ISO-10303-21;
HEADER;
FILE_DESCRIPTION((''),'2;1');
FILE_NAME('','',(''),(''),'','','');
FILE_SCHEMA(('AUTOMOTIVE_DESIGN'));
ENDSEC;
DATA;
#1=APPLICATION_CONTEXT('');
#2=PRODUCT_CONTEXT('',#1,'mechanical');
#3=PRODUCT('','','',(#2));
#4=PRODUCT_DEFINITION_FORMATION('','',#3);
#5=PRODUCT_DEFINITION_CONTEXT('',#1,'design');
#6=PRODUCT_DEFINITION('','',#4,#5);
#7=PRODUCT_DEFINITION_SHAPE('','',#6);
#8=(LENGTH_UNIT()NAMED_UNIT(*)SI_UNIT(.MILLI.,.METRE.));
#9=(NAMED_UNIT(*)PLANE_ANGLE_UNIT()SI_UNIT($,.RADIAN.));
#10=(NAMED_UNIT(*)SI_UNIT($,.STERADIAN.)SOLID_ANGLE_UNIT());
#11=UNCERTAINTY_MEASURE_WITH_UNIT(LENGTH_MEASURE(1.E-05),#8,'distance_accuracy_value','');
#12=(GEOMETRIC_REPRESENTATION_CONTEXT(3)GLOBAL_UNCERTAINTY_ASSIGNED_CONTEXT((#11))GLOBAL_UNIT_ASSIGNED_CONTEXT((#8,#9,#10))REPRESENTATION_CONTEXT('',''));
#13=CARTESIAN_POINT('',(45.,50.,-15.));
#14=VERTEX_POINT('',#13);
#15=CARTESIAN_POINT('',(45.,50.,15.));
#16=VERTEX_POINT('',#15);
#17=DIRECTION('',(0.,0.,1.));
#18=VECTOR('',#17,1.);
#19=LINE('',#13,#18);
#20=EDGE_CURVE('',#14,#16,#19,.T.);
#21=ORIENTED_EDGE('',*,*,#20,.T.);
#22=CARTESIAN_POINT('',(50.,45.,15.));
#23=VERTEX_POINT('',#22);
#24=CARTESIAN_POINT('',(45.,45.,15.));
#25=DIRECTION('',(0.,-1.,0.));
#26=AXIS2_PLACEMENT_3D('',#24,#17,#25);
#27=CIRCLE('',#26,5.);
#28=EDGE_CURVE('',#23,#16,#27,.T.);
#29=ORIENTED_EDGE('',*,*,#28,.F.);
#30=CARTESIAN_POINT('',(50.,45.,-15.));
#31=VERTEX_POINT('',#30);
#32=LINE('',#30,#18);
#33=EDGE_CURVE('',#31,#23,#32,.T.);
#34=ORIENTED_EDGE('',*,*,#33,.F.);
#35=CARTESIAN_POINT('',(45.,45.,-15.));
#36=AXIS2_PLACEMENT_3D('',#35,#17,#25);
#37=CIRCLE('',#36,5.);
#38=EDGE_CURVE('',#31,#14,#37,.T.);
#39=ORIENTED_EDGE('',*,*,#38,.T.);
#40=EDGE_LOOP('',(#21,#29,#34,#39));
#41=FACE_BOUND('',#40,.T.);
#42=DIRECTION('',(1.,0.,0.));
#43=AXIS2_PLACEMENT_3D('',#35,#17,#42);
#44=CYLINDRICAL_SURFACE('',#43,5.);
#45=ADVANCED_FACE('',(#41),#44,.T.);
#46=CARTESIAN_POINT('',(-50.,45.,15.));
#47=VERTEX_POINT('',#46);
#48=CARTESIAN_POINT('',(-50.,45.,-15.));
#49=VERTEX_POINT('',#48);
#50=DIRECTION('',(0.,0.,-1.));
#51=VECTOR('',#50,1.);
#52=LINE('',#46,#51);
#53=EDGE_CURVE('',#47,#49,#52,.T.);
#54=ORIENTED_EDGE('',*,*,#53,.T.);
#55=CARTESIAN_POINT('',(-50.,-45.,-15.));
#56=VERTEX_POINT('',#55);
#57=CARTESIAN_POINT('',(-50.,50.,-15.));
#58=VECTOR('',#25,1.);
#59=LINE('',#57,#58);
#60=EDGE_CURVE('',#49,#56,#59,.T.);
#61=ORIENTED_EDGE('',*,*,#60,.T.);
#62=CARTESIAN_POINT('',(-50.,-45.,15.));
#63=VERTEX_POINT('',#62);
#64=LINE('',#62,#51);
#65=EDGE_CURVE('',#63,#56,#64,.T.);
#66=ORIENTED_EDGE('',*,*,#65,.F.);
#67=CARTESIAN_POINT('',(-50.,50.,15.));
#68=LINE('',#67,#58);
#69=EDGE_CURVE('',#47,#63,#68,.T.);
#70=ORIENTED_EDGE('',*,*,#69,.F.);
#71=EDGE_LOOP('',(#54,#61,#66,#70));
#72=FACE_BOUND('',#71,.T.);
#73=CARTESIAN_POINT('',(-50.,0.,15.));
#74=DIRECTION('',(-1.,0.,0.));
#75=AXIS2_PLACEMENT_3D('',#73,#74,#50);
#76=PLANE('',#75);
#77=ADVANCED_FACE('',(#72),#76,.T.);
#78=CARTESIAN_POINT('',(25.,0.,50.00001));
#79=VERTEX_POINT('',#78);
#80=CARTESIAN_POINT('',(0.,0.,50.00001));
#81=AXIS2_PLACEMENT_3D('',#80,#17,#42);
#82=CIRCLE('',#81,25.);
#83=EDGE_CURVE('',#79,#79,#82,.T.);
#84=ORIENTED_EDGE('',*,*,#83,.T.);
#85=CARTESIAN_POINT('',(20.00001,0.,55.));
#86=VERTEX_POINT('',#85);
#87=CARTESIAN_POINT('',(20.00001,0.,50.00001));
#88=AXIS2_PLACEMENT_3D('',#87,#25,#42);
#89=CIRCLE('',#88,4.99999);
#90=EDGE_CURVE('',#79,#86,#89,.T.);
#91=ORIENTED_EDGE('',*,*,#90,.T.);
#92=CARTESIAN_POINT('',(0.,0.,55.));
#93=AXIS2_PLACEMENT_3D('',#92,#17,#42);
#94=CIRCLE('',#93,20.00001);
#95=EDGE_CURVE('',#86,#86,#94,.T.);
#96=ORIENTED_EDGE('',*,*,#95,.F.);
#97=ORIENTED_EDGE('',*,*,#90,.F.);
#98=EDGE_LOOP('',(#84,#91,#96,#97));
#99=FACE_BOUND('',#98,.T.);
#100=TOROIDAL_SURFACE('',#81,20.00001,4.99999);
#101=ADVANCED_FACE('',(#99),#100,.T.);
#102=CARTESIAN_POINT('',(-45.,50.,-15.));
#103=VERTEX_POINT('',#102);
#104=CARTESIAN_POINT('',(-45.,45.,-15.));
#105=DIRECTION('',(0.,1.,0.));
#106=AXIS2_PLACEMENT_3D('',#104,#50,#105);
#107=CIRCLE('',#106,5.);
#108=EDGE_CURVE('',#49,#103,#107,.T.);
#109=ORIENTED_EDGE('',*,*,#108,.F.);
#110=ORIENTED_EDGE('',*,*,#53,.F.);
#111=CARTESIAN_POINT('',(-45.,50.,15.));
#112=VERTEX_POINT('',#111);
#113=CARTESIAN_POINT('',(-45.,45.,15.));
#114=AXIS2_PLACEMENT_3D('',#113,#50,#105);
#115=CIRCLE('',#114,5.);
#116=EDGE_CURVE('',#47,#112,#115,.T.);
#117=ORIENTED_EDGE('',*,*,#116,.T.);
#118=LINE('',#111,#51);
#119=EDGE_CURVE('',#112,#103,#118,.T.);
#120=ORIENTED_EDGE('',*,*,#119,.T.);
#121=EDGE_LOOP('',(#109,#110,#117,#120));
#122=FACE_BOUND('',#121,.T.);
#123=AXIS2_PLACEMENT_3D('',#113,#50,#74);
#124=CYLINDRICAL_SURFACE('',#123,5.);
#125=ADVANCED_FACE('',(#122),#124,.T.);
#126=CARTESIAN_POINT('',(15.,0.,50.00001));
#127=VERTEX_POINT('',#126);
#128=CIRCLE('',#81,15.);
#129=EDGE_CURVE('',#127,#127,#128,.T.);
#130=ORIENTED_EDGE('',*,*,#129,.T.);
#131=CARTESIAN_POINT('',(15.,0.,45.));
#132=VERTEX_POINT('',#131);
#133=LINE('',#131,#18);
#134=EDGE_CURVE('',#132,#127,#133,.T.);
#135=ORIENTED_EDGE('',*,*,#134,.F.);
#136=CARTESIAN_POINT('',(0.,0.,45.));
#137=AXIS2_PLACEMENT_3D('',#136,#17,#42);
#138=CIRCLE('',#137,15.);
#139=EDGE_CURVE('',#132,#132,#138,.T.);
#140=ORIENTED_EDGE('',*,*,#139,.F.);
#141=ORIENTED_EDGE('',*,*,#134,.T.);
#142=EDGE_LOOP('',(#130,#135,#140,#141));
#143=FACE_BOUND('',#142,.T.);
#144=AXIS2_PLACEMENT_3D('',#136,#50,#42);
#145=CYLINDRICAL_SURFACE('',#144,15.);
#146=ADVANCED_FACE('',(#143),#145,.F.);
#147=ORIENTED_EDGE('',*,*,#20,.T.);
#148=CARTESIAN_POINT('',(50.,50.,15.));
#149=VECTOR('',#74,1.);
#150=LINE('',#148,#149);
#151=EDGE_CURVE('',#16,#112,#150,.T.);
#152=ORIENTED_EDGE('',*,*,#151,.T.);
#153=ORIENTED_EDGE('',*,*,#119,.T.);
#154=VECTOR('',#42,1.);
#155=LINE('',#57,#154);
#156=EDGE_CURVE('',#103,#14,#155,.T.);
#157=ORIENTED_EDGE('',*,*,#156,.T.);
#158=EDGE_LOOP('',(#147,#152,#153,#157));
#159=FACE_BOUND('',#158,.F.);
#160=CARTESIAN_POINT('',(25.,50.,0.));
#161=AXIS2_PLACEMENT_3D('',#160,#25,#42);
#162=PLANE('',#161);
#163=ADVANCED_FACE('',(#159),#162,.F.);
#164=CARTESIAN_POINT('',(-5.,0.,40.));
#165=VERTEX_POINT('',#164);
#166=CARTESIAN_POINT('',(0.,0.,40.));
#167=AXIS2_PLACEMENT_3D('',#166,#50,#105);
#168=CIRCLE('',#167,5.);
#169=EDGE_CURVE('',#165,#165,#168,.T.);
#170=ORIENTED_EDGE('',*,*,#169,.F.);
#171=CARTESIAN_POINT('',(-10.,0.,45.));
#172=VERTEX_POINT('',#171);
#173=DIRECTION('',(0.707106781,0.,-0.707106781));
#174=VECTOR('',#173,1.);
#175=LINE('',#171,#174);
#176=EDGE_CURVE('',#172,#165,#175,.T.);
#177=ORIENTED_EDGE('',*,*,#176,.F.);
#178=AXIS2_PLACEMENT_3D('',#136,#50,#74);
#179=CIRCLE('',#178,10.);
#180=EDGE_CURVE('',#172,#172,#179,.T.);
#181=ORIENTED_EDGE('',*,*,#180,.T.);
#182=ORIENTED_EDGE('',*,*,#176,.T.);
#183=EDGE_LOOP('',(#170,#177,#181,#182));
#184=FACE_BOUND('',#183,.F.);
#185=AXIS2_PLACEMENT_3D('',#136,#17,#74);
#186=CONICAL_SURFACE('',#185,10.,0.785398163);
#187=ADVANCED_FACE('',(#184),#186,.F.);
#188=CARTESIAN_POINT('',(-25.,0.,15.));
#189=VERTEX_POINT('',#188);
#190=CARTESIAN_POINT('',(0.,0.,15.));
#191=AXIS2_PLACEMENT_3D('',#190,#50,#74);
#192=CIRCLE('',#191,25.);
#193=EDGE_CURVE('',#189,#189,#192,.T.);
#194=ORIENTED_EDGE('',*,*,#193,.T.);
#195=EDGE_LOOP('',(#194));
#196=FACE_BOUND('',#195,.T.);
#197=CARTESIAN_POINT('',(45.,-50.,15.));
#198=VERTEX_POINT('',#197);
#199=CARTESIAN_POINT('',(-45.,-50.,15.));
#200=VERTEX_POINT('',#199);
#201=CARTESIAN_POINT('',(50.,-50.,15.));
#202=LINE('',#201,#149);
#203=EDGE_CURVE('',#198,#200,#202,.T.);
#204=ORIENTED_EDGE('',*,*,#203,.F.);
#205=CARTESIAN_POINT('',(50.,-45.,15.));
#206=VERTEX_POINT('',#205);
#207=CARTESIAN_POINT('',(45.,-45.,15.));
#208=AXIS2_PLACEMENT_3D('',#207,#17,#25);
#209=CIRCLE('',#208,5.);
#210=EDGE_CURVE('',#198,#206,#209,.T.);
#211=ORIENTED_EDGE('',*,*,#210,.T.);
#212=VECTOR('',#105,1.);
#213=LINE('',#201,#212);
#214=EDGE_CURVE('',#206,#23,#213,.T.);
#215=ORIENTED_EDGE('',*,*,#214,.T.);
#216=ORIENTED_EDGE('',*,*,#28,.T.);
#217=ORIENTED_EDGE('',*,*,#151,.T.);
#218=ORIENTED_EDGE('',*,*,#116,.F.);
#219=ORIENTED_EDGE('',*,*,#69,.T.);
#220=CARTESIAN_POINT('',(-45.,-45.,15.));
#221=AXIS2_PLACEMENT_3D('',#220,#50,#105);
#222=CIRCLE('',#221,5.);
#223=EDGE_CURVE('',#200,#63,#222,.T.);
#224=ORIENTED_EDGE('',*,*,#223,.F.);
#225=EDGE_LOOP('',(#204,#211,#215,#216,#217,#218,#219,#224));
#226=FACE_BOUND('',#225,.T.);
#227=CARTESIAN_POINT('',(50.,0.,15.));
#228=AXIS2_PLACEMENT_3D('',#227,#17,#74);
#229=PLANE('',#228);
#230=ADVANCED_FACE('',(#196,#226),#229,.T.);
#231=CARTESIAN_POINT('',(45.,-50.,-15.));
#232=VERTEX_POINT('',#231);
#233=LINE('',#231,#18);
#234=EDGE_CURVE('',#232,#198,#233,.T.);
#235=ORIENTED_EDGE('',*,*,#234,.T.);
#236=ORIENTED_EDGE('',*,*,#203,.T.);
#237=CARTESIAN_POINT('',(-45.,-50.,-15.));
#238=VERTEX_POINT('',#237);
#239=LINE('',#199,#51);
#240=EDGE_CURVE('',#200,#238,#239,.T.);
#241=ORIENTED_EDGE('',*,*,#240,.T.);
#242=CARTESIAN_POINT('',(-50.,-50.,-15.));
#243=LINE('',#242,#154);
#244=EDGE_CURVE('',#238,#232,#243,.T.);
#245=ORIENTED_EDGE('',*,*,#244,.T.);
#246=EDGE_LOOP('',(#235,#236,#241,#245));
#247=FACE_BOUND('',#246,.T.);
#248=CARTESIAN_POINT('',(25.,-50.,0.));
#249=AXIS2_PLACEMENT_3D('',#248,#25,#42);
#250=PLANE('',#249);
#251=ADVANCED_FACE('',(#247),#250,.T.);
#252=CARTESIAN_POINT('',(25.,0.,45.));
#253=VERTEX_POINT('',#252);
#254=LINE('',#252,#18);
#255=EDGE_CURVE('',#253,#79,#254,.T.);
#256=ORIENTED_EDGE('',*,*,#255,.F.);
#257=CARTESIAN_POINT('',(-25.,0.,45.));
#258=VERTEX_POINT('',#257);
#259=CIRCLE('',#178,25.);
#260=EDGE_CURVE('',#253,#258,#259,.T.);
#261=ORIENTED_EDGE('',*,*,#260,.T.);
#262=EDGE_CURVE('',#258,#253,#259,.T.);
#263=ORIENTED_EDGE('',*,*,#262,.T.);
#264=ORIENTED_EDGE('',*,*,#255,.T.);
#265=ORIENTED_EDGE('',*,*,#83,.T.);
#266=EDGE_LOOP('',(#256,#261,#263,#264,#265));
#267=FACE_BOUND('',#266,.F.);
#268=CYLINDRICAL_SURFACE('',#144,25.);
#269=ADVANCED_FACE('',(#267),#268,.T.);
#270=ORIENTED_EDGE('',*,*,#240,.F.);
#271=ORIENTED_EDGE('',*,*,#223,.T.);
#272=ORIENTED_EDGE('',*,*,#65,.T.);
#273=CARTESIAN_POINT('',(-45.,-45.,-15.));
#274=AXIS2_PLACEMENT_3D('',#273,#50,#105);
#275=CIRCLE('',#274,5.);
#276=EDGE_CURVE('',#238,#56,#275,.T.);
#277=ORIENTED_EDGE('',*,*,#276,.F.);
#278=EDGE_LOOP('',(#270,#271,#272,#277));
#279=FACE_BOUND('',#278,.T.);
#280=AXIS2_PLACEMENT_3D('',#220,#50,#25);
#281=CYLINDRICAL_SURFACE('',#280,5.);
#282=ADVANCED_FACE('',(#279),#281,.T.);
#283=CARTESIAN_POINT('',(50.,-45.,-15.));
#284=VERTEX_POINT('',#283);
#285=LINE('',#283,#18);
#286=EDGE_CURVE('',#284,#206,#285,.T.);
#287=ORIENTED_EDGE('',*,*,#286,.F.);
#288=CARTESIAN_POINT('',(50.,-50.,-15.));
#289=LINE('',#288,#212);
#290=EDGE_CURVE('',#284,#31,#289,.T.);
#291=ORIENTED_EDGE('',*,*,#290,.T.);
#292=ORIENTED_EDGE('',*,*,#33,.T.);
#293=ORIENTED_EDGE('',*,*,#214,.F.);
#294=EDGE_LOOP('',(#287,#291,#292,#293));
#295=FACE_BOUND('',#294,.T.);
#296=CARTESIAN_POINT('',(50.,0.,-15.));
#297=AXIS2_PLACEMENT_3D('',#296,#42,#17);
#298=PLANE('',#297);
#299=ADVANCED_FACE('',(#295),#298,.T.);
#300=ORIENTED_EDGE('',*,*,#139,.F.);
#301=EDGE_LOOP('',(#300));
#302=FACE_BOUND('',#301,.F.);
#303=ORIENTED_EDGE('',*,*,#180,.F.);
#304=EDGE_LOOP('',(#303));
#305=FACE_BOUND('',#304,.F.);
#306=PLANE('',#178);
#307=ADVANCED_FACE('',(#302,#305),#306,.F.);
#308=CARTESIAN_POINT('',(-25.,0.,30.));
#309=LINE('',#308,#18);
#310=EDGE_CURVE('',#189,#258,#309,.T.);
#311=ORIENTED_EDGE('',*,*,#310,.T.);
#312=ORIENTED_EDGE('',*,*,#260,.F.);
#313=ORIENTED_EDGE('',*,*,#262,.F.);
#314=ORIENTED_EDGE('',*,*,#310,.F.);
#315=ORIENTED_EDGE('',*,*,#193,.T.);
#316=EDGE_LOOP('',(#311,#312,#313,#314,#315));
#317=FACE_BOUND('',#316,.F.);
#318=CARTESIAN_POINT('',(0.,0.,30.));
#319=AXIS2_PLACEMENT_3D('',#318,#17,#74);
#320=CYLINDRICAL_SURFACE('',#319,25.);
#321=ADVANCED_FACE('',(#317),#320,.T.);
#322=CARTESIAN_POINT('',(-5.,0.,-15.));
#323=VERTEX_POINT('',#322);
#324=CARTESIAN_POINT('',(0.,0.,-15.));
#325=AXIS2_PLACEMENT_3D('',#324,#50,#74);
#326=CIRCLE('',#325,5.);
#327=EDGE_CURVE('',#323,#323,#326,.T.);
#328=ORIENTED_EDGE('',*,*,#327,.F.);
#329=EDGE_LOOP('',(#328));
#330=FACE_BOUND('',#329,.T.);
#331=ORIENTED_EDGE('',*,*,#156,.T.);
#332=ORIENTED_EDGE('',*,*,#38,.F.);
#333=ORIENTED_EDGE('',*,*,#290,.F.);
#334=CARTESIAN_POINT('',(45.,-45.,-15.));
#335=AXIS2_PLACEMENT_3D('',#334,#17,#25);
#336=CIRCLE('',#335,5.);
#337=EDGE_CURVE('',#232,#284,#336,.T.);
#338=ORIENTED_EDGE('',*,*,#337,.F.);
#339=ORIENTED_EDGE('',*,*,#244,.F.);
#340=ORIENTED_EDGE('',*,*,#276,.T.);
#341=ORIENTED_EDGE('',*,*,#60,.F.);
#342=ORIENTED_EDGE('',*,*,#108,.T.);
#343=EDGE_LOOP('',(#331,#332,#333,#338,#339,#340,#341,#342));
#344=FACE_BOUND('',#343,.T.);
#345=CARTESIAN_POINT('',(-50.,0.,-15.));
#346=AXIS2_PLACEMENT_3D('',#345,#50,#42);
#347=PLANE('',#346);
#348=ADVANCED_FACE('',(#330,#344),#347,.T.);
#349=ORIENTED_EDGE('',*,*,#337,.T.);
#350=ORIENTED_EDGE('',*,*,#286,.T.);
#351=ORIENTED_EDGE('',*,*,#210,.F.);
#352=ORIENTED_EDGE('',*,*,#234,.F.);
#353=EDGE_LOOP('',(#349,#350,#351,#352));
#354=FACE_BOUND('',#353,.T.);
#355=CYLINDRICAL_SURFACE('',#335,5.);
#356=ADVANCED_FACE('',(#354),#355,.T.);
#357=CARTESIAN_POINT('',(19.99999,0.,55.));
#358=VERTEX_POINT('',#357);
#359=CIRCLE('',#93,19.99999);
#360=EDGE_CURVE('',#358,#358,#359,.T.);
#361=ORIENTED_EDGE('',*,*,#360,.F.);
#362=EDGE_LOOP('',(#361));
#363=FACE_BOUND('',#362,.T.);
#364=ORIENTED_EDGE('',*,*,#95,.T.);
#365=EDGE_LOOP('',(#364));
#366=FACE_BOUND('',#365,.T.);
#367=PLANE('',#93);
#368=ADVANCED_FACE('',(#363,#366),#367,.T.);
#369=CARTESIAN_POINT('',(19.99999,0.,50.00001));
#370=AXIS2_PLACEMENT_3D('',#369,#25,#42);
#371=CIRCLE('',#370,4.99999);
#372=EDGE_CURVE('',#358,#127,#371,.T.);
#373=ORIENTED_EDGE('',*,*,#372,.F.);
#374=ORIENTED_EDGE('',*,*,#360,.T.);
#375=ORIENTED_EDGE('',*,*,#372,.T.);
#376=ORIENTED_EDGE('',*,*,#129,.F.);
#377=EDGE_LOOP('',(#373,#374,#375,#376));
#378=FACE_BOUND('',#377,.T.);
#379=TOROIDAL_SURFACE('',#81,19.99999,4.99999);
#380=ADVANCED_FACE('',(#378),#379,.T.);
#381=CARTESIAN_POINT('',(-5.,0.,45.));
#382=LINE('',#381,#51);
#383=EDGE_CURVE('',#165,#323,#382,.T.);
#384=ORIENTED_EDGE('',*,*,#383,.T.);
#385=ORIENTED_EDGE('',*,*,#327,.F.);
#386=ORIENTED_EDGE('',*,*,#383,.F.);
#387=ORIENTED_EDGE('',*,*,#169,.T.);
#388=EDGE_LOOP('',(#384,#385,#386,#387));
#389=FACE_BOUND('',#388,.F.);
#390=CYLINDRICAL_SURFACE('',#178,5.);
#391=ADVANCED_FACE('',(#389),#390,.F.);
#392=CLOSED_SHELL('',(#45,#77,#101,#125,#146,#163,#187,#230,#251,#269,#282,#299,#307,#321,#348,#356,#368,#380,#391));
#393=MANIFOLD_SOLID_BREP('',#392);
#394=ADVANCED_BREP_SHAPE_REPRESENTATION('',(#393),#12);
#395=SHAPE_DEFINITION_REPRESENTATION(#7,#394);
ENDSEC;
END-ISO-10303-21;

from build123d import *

# Parameters (mm, degrees)
F1_DEPTH       = 50
F0_W           = 25
F0_H           = 30
F4_D           = 10
F4_CSINK_D     = 20
F4_CSINK_ANGLE = 90
F5_R           = 5
F3_R           = 25
F3_R_2         = 15
F6_DEPTH       = 10
F7_R           = 4.99999


# Not quite as in the source:
# - a fillet or chamfer is up to 0.001 mm smaller than in the source, because OpenCascade refuses the exact size


with BuildPart() as f1:
    # F0 (on Front) → F1 (new body, symmetric)
    with BuildSketch(Plane.XZ):
        Polygon((50, 15), (25, 15), (0, 15), (0, -15), (50, -15), align=None)
        Polygon((0, -15), (0, 15), (-25, 15), (-50, 15), (-50, -15), align=None)
    extrude(amount=F1_DEPTH, both=True)

    # F0 (on Front) → F2 (revolve)
    with BuildSketch(Plane.XZ):
        with Locations((-12.5, 30)):
            Rectangle(F0_W, F0_H)
    revolve(axis=Axis((0, 0, 15), (0, 0, -1)))

    # F4 (through all)
    with Locations(Plane.XY.offset(45)):
        with Locations((0, 0)):
            CounterSinkHole(F4_D / 2, F4_CSINK_D / 2, counter_sink_angle=F4_CSINK_ANGLE)

    # F5
    f5_edges = [f1.edges().sort_by_distance(p)[0] for p in [
        (-50, 50, 0),
        (50, 50, 0),
        (50, -50, 0),
        (-50, -50, 0),
    ]]
    fillet(f5_edges, radius=F5_R)

    # F3 (on face) → F6 (join)
    with BuildSketch(Plane.XY.offset(45)):
        Circle(F3_R)
        Circle(F3_R_2, mode=Mode.SUBTRACT)
    extrude(amount=F6_DEPTH)

    # F7 (radius 5 in the source; OpenCascade refuses exactly that, so slightly less here)
    f7_edges = [f1.edges().sort_by_distance(p)[0] for p in [
        (-25, 0, 55),
        (-25, 0, 30),
        (-15, 0, 55),
    ]]
    fillet(f7_edges, radius=F7_R)


solid = f1.part
